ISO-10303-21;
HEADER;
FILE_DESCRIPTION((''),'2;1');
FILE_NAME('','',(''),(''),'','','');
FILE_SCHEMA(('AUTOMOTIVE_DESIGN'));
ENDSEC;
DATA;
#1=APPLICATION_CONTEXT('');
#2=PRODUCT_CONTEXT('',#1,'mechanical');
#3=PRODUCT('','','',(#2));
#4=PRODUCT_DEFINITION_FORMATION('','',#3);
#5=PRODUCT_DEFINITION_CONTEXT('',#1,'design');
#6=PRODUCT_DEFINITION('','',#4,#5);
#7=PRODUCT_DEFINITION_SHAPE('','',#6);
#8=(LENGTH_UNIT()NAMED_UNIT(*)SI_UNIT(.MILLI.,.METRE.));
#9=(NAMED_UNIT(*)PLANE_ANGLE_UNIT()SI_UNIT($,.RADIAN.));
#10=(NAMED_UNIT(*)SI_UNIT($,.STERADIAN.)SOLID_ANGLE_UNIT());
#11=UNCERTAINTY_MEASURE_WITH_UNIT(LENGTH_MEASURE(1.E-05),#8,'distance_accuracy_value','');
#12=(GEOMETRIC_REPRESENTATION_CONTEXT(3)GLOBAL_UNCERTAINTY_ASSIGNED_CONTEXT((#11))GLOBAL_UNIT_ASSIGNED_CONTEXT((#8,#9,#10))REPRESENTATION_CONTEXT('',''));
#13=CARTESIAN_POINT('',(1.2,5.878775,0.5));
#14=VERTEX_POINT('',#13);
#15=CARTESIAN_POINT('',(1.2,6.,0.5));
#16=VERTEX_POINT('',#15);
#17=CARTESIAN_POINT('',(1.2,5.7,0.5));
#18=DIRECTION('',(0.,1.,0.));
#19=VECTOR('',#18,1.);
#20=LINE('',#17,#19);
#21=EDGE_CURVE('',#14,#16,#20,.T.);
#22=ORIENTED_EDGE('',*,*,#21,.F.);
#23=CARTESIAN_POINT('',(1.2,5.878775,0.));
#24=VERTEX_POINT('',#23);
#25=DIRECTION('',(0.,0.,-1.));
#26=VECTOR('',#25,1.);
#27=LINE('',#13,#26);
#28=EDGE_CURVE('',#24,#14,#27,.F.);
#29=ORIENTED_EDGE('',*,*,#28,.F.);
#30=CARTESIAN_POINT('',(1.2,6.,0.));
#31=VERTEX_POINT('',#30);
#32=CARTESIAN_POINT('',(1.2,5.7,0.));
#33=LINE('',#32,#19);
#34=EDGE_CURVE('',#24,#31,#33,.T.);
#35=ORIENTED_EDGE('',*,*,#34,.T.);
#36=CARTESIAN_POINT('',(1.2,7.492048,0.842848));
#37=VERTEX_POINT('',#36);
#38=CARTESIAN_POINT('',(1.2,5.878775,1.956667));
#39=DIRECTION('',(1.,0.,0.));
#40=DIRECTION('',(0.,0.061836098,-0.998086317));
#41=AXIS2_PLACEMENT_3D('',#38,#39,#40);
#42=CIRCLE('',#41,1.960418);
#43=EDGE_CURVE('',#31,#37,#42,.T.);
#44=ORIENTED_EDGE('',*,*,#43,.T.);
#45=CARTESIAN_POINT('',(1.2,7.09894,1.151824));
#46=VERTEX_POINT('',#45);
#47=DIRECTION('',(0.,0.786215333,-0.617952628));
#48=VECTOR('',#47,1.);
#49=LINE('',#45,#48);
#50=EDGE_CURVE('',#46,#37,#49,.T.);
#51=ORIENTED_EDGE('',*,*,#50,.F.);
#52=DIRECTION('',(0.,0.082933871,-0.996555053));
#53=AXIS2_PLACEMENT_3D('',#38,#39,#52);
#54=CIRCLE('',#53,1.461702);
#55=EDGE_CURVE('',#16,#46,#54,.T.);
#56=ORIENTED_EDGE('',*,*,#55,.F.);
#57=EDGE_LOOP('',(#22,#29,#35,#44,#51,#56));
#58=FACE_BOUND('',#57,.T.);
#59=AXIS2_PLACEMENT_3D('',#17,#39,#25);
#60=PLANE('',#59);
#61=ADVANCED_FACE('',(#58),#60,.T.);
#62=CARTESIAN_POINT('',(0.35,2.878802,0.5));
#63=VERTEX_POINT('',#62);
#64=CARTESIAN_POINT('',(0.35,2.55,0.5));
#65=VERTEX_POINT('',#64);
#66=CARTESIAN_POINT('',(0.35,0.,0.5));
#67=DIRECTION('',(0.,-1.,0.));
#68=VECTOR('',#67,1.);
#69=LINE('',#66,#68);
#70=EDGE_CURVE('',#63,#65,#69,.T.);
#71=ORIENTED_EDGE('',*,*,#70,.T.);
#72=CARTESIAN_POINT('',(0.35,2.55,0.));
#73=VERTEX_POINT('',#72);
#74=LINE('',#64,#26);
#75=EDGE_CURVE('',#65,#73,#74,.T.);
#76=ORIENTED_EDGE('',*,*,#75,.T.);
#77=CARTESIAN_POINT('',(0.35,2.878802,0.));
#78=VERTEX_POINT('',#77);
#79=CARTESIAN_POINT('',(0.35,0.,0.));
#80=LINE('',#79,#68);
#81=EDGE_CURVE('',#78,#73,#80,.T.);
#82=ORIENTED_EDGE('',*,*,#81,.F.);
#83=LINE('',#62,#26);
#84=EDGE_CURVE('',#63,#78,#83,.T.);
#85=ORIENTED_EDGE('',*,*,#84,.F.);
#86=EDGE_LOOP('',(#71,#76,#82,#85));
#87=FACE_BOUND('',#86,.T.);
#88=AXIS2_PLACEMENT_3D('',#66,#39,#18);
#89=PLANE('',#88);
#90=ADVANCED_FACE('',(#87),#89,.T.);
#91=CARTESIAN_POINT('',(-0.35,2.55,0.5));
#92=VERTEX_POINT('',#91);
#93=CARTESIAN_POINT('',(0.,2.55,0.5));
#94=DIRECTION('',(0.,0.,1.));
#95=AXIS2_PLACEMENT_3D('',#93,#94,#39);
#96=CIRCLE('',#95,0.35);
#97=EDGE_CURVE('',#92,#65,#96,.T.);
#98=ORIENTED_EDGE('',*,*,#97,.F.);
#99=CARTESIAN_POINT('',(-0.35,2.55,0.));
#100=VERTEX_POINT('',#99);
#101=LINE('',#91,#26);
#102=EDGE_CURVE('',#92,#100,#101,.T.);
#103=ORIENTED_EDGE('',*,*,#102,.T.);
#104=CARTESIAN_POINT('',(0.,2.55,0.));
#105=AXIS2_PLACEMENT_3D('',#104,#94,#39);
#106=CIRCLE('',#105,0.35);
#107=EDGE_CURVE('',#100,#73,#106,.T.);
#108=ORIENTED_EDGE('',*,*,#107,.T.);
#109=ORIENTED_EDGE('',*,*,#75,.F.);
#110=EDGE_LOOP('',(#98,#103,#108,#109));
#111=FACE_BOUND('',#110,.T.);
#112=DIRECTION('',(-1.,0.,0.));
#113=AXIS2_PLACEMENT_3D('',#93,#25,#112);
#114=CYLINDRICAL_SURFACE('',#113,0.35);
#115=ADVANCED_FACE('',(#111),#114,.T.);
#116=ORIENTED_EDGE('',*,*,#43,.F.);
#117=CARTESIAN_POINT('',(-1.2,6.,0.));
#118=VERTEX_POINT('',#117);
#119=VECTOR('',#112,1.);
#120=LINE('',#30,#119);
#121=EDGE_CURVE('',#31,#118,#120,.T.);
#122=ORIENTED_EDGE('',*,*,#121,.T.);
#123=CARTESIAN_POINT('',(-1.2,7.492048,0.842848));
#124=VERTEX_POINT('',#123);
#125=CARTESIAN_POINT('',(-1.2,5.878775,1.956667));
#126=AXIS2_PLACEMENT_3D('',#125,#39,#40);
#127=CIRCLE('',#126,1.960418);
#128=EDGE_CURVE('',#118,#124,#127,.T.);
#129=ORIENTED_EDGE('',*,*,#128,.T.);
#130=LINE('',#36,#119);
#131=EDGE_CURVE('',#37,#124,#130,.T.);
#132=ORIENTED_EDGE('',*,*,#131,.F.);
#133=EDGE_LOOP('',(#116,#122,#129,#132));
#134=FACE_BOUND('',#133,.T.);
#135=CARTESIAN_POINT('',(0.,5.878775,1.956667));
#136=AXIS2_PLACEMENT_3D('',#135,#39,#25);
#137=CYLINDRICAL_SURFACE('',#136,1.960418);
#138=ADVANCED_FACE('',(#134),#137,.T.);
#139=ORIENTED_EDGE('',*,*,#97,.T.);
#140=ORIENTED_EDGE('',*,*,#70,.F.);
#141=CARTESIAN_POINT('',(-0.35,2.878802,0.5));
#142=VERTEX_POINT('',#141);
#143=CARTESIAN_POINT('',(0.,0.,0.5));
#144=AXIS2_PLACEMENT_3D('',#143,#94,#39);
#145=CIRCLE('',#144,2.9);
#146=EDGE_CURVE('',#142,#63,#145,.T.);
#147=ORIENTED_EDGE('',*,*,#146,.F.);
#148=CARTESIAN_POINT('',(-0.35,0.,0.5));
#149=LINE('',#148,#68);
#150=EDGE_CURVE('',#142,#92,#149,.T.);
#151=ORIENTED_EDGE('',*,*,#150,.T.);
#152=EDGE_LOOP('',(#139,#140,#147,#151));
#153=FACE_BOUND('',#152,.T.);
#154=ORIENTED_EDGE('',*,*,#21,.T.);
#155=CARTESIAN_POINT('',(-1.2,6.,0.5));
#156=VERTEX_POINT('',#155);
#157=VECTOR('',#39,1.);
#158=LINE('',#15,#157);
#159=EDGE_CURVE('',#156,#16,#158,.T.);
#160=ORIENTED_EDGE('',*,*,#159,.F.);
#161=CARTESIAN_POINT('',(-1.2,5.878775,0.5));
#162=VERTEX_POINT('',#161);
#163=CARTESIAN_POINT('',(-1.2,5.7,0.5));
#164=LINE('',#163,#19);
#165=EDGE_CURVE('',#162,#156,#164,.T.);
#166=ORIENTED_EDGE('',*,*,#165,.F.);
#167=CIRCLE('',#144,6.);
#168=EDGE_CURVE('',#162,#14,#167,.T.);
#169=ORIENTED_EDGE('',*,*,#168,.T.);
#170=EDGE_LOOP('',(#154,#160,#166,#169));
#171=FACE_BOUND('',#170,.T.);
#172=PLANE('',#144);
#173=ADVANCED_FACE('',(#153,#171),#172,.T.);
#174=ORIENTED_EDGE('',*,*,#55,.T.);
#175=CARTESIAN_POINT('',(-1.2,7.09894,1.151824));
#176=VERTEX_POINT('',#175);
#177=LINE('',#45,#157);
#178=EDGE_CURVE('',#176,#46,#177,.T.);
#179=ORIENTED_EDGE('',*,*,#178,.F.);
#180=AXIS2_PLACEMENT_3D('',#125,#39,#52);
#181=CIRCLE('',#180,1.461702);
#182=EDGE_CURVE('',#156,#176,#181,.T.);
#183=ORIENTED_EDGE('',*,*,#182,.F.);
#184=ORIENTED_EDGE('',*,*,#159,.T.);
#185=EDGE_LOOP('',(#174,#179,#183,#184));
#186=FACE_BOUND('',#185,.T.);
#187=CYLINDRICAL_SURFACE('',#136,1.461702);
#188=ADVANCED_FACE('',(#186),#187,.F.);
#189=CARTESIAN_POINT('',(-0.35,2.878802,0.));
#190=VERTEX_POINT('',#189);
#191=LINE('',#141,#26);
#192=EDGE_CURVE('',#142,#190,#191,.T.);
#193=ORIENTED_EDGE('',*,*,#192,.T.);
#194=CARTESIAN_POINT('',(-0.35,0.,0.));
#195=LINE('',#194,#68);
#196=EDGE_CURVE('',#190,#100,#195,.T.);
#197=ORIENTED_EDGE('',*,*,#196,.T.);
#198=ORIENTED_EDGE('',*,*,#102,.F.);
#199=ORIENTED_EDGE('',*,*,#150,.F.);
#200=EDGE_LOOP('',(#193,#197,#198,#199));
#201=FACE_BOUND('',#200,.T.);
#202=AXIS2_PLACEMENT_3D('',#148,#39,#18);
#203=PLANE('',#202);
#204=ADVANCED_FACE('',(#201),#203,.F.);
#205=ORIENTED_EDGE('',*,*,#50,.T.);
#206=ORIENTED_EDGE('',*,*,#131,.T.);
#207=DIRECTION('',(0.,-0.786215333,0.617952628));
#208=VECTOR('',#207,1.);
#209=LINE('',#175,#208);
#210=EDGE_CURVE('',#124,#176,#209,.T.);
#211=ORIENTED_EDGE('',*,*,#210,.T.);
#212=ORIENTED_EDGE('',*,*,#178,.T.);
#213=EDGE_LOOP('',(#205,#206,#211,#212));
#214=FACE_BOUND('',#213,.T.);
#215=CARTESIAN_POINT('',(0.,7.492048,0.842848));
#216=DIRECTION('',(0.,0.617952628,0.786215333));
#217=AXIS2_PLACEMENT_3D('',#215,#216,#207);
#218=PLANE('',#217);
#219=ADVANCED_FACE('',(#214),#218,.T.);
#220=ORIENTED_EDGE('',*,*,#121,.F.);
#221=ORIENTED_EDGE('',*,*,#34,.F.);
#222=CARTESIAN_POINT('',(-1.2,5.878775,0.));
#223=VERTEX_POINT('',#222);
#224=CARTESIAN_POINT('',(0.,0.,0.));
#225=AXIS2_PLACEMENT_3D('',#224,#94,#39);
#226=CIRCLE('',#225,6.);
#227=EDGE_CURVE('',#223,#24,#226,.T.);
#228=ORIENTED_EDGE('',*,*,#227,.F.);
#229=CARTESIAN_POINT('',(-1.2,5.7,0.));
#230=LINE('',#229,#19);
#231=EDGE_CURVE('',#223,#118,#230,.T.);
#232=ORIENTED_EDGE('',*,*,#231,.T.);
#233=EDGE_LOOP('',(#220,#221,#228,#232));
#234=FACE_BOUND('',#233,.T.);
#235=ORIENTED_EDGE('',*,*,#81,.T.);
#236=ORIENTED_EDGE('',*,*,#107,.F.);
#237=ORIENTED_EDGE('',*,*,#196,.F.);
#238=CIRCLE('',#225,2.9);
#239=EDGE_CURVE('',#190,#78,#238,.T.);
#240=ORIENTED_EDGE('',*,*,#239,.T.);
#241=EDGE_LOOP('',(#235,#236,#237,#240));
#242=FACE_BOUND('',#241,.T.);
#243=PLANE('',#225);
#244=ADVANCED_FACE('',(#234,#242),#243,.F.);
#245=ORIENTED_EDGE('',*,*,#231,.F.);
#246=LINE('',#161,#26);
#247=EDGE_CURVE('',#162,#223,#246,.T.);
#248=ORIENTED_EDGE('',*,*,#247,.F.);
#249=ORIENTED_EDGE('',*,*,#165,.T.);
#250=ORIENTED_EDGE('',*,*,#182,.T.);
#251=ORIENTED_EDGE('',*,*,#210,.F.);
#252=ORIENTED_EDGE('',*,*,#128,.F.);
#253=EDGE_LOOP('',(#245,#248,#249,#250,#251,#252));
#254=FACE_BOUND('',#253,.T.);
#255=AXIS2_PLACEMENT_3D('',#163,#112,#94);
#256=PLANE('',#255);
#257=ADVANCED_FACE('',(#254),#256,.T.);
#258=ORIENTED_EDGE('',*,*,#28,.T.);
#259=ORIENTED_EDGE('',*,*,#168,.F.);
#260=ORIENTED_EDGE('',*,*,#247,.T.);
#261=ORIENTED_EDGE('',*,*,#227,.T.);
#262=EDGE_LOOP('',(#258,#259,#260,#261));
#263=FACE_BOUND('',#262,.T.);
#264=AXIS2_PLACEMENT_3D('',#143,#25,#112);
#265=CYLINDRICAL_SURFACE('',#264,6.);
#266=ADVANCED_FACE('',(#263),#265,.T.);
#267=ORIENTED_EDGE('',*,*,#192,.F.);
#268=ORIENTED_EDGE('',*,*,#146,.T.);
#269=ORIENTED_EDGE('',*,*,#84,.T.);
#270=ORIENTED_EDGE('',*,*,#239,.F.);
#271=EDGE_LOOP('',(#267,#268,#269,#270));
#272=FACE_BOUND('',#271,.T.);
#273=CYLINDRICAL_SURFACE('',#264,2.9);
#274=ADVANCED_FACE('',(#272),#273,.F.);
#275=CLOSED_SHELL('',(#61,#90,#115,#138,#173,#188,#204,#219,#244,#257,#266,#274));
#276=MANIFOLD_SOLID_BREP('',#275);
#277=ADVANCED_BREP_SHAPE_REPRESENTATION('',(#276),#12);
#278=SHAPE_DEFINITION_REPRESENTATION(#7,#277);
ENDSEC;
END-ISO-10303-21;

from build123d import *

# Parameters (mm, degrees)
SKETCH1_R           = 6
BOSS_EXTRUDE1_DEPTH = 0.5
BOSS_EXTRUDE2_START = -0.121225
SKETCH2_W           = 2.4
SKETCH2_H           = 0.5
BOSS_EXTRUDE2_DEPTH = 0.121225
SWEEP1_START        = -1.2
SWEEP1_DEPTH        = 2.4


# Read off the part's stored shape, not the designer's step: Sweep1
with BuildPart() as part:
    # Sketch1 → Boss-Extrude1 (new body)
    with BuildSketch(Plane.XY):
        Circle(SKETCH1_R)
        with BuildLine():
            Line((-0.35, 2.878801834), (-0.35, 2.55))
            ThreePointArc((-0.35, 2.55), (0, 2.2), (0.35, 2.55))
            Line((0.35, 2.55), (0.35, 2.878801834))
            ThreePointArc((0.35, 2.878801834), (0, -2.9), (-0.35, 2.878801834))
        make_face(mode=Mode.SUBTRACT)
    extrude(amount=BOSS_EXTRUDE1_DEPTH)

    # Sketch2 → Boss-Extrude2 (add)
    with BuildSketch(Plane(origin=(0, 6, 0), x_dir=(1, 0, 0), z_dir=(0, 1, 0)).offset(BOSS_EXTRUDE2_START)):
        with Locations((0, -0.25)):
            Rectangle(SKETCH2_W, SKETCH2_H)
    extrude(amount=BOSS_EXTRUDE2_DEPTH)

    # Sweep1 outline → Sweep1 (add)
    with BuildSketch(Plane.YZ.offset(SWEEP1_START)):
        with BuildLine():
            ThreePointArc((6, 0), (6.842994327, 0.249762545), (7.492047788, 0.84284801))
            Line((7.492047788, 0.84284801), (7.098940121, 1.151824324))
            ThreePointArc((7.098940121, 1.151824324), (6.624463044, 0.699478098), (6, 0.5))
            Line((6, 0.5), (6, 0))
        make_face()
    extrude(amount=SWEEP1_DEPTH)


solid = part.part
